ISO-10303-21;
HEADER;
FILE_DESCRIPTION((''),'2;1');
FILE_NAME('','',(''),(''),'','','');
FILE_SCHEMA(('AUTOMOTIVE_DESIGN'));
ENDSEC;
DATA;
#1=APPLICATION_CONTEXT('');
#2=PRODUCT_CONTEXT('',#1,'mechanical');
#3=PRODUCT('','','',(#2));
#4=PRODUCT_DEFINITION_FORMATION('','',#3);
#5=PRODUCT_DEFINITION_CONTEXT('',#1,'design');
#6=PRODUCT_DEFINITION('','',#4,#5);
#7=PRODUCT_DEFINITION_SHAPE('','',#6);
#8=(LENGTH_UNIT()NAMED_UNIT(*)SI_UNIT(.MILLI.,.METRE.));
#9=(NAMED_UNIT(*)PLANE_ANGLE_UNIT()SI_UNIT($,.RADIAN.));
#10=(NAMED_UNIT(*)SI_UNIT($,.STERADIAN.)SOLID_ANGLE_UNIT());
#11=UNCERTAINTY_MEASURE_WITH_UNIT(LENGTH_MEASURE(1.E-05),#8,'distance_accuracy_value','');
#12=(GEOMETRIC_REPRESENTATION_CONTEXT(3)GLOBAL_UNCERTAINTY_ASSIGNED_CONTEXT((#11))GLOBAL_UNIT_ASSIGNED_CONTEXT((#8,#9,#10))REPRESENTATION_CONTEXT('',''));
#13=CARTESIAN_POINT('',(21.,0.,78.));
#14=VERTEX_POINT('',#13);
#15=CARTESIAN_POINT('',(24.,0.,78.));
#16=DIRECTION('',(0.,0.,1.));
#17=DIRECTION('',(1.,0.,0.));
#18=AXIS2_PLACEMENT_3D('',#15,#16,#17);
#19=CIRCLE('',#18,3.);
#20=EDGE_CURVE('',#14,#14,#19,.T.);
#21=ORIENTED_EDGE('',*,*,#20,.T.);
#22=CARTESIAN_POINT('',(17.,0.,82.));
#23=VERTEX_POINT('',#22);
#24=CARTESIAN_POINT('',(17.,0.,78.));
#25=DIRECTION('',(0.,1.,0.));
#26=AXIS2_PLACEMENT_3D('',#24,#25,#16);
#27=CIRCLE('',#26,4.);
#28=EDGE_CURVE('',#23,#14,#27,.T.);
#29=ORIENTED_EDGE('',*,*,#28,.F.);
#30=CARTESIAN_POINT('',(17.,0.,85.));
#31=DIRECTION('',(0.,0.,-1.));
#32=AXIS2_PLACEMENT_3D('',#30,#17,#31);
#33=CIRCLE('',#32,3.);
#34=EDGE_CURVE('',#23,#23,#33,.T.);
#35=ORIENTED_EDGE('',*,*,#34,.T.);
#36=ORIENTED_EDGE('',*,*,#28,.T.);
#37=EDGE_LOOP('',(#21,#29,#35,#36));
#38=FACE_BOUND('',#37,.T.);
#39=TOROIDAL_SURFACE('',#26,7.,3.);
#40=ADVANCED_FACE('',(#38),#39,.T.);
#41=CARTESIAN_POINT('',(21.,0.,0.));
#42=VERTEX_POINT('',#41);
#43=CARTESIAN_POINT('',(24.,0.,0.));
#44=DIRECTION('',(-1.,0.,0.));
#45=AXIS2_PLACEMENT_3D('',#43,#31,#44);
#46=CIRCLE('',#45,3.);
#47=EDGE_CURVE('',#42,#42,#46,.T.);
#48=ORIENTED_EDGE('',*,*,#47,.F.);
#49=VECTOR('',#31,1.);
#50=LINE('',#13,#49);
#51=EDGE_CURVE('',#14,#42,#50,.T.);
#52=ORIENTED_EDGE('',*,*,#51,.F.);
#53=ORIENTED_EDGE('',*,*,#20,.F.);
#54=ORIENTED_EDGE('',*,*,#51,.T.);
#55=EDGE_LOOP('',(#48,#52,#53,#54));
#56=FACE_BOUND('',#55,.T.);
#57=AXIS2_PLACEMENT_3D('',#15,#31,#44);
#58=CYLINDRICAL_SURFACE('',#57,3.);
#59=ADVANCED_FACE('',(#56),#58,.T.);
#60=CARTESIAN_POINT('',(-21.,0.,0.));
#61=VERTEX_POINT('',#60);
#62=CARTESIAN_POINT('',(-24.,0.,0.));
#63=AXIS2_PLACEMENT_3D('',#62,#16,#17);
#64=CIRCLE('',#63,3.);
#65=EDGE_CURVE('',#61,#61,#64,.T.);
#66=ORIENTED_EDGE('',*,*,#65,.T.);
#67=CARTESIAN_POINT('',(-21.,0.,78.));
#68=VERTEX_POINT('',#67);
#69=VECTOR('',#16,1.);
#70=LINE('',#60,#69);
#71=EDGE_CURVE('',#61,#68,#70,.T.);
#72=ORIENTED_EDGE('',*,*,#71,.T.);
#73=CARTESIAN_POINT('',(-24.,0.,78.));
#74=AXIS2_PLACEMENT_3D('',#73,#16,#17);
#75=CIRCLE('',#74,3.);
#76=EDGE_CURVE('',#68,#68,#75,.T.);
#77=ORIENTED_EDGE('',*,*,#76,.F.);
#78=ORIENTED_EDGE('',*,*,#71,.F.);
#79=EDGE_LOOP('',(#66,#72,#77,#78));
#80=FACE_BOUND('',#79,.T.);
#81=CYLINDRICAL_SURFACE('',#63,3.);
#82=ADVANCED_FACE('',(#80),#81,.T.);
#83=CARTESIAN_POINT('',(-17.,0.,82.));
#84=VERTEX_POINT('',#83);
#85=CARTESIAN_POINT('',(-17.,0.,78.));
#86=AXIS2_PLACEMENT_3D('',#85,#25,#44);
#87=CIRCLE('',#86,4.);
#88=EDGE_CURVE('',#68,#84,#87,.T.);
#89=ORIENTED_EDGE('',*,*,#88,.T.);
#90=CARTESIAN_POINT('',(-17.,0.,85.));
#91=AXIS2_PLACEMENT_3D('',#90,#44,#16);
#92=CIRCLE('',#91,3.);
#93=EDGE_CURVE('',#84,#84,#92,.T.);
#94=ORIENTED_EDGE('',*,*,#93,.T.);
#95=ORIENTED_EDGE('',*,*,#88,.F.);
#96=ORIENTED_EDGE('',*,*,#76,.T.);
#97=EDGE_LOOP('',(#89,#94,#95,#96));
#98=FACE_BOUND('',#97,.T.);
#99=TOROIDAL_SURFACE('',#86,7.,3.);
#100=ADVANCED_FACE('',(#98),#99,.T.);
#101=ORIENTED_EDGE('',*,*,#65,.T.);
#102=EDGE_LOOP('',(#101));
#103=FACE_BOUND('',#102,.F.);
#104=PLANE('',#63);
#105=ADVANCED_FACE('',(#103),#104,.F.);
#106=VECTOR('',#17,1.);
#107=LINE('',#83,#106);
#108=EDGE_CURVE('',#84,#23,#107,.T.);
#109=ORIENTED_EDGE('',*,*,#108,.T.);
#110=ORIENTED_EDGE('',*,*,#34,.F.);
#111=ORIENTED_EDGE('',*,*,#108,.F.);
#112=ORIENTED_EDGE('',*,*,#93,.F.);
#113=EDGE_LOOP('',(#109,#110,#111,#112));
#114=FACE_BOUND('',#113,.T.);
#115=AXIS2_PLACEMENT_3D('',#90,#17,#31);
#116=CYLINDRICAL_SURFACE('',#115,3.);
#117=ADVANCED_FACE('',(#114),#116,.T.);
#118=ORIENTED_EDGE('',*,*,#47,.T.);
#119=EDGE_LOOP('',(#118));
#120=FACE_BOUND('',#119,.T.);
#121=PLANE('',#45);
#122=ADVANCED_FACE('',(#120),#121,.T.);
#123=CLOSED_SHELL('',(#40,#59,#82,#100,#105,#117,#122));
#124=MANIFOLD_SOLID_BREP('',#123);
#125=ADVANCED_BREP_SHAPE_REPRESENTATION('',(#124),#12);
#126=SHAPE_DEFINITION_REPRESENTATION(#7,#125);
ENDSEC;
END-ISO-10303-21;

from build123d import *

# Parameters (mm, degrees)
F1_R = 3


with BuildPart() as f2:
    # F2: sweep along a path in F0
    with BuildLine(Plane.XZ) as f2_path:
        Line((-21, 0), (-21, 78))
        ThreePointArc((-21, 78), (-19.8284271247, 80.8284271247), (-17, 82))
        Line((-17, 82), (17, 82))
        ThreePointArc((17, 82), (19.8284271247, 80.8284271247), (21, 78))
        Line((21, 78), (21, 0))
    # F1 (on Top) → F2 (sweep)
    with BuildSketch(Plane.XY):
        with Locations((-24, 0)):
            Circle(F1_R)
    sweep(path=f2_path.line)


solid = f2.part
